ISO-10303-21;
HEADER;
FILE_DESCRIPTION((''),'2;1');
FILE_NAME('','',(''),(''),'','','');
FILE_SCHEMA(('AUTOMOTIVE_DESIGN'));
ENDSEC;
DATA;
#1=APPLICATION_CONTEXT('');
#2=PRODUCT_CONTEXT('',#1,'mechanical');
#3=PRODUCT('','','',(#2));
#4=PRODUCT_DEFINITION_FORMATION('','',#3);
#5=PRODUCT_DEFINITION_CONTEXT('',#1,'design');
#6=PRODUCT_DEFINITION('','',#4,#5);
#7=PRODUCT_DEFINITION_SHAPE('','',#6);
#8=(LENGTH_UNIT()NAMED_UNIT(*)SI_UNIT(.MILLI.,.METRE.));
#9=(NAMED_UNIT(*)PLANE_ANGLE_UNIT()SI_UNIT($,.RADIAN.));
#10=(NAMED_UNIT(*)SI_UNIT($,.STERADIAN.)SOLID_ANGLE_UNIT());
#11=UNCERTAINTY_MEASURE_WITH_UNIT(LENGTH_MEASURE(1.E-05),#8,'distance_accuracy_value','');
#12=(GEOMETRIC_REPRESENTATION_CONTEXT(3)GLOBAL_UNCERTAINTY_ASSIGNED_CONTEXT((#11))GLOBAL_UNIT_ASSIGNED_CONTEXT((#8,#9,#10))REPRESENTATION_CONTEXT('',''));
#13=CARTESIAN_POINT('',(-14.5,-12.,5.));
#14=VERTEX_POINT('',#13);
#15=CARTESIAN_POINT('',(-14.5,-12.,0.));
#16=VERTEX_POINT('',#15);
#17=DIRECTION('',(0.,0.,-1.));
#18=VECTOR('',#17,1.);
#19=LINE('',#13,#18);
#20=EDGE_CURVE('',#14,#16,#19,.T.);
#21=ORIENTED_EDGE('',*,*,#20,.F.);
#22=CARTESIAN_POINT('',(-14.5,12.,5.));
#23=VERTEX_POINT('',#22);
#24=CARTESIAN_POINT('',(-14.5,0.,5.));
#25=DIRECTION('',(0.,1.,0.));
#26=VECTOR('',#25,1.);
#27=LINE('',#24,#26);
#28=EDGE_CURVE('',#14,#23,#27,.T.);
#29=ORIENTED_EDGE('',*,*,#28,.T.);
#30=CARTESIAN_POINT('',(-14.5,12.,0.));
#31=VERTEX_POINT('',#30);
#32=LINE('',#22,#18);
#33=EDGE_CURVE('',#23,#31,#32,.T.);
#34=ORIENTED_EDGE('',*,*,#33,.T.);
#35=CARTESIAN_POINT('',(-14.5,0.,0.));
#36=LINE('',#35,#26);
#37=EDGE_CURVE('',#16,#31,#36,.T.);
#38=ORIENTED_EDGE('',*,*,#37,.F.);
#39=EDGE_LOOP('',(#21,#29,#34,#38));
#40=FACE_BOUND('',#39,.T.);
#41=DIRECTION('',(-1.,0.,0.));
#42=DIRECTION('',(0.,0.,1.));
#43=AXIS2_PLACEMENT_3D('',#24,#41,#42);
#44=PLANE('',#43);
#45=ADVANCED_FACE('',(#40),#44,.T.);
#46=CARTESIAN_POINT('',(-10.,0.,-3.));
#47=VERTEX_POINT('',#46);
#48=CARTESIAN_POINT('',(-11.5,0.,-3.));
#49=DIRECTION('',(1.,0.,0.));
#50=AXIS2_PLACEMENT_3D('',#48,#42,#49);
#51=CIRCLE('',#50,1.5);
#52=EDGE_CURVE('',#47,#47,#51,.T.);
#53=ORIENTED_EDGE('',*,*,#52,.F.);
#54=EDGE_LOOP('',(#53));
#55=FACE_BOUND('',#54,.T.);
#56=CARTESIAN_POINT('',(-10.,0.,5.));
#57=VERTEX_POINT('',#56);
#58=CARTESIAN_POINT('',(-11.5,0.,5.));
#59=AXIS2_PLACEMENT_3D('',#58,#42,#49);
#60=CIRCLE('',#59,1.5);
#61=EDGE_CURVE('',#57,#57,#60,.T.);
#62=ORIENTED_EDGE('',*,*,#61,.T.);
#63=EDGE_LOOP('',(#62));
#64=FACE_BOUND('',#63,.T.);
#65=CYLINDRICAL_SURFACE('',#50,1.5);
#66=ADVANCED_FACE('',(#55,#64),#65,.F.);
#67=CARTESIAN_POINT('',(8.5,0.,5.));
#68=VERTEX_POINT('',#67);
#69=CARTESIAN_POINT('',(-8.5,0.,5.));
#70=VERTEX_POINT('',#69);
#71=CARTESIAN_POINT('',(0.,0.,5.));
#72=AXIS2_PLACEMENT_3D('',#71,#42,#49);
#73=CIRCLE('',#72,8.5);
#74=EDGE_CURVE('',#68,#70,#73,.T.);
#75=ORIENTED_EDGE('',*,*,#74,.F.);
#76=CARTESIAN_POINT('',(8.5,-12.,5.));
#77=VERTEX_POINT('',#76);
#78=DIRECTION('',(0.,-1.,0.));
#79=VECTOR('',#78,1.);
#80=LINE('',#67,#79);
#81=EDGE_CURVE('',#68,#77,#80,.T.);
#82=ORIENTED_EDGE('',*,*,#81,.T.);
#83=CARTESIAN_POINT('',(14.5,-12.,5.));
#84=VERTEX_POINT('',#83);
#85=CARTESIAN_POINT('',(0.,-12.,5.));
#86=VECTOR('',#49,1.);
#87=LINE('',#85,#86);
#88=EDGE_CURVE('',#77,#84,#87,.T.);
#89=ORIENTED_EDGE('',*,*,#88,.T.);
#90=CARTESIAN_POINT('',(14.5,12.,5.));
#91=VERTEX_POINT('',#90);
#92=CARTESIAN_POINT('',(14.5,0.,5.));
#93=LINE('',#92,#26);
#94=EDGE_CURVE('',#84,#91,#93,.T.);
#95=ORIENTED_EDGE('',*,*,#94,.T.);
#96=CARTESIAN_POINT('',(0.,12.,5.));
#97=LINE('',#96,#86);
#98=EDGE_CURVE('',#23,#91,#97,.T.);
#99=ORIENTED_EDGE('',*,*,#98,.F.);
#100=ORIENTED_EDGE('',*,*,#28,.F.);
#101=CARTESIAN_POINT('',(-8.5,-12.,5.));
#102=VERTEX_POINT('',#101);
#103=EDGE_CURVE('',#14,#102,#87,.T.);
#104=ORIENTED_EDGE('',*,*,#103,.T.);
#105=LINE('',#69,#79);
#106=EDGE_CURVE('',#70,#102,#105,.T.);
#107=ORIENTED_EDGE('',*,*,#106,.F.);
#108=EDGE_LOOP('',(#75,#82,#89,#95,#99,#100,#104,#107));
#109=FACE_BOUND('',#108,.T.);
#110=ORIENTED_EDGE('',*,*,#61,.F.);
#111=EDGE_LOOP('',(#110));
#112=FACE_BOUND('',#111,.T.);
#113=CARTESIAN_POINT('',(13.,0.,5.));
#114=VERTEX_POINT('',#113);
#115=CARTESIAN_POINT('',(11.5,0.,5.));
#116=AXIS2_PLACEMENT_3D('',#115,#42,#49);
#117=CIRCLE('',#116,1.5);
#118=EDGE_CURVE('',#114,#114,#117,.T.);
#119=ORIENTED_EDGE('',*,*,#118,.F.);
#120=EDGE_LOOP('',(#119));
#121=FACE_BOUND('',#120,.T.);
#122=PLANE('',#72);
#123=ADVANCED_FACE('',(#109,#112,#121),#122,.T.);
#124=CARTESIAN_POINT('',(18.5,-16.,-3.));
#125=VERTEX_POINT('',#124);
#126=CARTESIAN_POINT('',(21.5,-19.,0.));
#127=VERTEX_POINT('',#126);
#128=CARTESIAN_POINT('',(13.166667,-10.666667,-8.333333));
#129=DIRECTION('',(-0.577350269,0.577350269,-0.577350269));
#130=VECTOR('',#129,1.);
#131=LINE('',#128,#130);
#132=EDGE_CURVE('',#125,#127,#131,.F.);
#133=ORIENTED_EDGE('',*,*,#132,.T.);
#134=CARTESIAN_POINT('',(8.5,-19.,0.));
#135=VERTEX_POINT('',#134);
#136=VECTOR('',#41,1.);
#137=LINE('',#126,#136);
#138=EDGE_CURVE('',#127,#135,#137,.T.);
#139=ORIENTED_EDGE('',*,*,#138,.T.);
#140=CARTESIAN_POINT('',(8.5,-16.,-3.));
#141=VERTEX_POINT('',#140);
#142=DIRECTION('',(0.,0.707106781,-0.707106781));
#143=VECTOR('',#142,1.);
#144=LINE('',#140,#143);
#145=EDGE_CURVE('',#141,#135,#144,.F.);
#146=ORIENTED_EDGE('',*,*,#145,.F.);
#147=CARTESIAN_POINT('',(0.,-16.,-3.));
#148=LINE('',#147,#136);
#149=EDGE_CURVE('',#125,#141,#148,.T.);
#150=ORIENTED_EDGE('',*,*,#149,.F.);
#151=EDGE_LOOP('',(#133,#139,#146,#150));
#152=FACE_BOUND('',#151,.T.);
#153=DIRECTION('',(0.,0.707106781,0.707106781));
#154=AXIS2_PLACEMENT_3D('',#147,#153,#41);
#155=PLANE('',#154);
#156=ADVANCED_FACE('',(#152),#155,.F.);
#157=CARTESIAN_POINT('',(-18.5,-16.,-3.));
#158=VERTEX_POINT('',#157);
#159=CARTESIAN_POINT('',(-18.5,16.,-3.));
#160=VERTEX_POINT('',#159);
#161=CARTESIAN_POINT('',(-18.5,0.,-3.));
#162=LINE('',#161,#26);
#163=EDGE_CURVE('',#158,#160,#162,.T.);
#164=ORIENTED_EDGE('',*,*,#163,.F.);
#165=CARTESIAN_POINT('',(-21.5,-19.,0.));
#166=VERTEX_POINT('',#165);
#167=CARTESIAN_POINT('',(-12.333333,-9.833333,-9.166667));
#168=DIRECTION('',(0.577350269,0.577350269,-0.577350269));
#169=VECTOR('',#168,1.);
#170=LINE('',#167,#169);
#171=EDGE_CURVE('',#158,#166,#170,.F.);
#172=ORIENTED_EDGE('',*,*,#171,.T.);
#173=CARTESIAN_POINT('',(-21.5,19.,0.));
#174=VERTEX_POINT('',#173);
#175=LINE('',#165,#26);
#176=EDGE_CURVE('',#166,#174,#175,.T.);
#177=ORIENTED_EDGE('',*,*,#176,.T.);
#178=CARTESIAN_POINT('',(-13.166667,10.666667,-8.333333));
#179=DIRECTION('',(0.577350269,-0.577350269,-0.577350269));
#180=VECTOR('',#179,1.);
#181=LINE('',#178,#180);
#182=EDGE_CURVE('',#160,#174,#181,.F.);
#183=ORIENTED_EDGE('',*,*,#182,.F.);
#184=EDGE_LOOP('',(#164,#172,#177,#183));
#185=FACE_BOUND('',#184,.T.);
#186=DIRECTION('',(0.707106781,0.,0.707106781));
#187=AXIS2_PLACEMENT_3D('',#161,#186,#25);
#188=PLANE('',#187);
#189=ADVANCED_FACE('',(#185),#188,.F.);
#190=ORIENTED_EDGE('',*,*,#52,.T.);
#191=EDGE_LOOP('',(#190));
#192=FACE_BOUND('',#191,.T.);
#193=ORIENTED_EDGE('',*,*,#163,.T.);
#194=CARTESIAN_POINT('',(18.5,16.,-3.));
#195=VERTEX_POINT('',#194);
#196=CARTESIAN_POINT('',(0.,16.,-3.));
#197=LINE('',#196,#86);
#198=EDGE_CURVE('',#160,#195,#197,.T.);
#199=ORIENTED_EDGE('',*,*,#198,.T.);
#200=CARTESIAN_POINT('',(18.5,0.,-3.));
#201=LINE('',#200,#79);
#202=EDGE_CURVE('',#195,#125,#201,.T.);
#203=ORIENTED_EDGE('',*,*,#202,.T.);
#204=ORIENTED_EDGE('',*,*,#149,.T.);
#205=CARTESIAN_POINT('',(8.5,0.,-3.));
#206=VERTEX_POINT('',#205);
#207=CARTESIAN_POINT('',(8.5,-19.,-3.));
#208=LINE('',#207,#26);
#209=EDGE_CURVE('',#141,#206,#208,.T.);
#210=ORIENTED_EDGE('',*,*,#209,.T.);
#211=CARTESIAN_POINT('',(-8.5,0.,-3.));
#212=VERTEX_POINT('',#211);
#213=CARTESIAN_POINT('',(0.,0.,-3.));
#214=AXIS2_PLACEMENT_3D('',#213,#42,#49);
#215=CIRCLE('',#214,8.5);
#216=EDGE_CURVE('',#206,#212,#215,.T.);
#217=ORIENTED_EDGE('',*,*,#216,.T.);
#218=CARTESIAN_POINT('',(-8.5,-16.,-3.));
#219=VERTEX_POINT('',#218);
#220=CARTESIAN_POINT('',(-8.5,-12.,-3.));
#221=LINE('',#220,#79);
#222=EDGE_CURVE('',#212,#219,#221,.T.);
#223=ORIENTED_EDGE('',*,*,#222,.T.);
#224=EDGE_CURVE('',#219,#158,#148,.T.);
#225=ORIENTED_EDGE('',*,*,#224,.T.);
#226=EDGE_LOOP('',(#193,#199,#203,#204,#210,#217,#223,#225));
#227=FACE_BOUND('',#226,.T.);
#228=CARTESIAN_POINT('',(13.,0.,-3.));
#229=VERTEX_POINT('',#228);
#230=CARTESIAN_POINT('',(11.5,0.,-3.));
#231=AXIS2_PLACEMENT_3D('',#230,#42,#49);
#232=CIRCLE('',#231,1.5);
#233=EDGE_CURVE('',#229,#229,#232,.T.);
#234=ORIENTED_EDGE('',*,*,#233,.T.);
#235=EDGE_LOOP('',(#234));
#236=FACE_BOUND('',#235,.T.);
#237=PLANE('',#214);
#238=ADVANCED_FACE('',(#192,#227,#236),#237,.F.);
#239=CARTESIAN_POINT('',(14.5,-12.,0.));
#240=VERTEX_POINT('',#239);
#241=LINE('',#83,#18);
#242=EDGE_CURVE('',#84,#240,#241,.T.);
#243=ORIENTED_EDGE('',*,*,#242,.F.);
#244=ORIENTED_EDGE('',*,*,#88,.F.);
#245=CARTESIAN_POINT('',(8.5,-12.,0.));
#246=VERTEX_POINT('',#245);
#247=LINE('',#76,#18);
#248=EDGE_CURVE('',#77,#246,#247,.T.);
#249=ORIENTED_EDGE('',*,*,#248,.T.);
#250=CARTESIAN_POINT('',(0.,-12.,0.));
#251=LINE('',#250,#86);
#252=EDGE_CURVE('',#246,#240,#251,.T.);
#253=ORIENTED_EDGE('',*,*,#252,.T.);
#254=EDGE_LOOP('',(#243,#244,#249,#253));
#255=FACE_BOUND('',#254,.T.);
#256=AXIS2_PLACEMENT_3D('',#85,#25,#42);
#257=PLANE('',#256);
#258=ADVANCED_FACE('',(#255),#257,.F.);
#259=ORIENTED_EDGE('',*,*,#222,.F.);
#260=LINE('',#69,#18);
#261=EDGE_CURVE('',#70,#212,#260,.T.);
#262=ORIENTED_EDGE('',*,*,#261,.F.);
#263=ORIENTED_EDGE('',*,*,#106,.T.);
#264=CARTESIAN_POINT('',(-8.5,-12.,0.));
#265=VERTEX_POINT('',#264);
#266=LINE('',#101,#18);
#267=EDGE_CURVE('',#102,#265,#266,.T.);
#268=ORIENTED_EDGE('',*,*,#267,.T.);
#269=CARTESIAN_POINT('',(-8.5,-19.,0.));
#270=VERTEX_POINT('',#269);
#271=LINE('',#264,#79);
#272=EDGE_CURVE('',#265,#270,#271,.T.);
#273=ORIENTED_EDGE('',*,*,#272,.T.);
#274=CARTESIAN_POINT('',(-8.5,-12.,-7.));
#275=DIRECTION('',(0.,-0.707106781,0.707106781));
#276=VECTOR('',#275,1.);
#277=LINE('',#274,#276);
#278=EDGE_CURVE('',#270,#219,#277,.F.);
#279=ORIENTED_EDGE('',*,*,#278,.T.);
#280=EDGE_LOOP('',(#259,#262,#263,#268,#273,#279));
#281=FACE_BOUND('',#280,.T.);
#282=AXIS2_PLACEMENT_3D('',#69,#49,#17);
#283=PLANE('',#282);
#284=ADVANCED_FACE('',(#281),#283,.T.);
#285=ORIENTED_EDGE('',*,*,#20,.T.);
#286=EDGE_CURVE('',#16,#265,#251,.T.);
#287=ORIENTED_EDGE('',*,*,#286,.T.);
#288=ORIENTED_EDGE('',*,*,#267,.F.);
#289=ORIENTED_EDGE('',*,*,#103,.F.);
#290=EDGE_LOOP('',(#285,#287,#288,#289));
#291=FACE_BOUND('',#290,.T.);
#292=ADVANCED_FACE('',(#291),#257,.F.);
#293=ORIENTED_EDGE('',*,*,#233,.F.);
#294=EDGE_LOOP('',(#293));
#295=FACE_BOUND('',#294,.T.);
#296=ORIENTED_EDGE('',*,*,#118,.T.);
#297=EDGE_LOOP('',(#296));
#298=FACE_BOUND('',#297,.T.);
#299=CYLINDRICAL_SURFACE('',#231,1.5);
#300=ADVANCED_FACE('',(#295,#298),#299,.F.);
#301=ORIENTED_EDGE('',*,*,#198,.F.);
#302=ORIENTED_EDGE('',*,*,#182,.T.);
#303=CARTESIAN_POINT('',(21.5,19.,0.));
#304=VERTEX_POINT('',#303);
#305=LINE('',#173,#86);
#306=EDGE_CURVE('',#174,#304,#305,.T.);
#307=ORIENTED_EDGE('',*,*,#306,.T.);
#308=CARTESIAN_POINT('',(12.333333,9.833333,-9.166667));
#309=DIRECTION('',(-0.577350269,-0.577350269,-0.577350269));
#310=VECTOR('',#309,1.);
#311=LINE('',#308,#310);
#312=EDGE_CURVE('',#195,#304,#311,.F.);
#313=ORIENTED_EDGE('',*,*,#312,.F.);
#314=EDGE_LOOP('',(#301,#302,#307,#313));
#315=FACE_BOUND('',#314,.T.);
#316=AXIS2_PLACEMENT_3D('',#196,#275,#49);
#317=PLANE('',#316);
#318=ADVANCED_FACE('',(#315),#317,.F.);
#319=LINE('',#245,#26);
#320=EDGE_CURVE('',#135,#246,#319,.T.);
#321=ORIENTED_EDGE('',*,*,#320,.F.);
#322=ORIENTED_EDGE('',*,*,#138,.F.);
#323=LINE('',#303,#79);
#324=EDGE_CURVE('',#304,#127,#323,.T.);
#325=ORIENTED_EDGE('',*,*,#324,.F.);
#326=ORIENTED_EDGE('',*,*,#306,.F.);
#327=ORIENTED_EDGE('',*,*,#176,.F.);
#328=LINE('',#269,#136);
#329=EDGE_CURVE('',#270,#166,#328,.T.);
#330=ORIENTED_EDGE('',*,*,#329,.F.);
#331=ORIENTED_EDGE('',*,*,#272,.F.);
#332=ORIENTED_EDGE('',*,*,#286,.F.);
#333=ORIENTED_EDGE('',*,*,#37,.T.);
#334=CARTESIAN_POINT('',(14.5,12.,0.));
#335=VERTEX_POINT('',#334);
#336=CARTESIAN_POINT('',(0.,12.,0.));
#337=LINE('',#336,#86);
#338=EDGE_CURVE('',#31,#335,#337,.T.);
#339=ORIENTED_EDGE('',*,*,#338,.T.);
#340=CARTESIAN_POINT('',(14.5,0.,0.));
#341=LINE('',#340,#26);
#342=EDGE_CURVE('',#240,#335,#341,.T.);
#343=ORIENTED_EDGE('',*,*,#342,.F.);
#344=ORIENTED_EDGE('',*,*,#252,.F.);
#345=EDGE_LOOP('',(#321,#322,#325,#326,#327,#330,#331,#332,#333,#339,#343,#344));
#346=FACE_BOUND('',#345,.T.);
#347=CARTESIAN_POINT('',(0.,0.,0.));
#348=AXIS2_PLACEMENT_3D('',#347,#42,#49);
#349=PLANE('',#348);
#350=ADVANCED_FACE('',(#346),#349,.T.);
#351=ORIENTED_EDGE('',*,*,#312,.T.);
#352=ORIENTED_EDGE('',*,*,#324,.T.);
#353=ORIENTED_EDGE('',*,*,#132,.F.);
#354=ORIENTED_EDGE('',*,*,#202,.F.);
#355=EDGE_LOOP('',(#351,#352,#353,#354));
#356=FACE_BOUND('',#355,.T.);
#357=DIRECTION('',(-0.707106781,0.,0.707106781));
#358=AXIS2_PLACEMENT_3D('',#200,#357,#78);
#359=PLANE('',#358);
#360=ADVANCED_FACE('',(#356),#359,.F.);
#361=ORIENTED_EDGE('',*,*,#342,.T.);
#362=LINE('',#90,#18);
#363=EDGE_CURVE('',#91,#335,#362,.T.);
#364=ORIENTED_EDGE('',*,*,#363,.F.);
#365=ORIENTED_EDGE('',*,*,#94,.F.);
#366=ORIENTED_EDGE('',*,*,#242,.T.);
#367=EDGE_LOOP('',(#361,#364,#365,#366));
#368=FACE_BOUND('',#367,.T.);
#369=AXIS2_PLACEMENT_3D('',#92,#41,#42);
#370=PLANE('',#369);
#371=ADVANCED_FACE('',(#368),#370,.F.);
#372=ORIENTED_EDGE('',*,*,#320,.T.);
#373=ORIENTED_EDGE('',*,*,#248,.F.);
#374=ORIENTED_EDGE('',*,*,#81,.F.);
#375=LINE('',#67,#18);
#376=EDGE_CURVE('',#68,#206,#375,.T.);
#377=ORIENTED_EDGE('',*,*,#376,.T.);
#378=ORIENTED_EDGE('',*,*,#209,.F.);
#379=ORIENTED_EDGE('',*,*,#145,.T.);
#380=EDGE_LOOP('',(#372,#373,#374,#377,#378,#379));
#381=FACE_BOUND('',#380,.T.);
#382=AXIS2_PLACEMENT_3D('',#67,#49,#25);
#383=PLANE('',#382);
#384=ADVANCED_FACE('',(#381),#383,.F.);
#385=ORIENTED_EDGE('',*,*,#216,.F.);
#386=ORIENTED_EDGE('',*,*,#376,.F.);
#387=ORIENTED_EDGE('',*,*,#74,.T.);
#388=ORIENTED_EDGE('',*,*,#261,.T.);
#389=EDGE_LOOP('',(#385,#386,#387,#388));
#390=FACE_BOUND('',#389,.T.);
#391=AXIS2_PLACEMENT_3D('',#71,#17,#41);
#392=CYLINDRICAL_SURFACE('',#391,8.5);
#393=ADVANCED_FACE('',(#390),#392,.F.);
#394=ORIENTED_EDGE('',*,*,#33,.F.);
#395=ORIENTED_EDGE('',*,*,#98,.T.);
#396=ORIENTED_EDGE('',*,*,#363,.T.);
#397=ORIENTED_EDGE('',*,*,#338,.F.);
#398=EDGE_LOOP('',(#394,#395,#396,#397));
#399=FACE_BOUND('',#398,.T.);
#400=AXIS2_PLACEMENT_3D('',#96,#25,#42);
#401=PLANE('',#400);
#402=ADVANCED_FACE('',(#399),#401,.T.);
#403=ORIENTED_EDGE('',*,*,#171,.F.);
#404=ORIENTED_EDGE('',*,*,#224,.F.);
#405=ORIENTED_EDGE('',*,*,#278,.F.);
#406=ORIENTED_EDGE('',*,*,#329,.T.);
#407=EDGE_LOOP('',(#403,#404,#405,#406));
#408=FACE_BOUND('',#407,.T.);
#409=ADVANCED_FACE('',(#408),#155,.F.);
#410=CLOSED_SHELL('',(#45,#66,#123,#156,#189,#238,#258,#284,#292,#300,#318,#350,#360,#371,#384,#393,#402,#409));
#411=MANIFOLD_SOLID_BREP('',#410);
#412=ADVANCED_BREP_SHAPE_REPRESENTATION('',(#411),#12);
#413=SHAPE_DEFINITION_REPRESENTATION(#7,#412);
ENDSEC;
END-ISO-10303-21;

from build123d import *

# Parameters (mm, degrees)
EXTRUDE_1_DEPTH     = 5
EXTRUDE_START       = 3
EXTRUDE_2_DEPTH     = 3
SKETCH_3_R          = 1.5
CUT_EXTRUDE_1_DEPTH = 30.786742017
CHAMFER_1_SIZE      = 3


with BuildPart() as part:
    # ｽｹｯﾁ1 → ﾎﾞｽ - 押し出し1 (new body)
    with BuildSketch(Plane.XY):
        with BuildLine():
            ThreePointArc((-8.5, 0), (0, 8.5), (8.5, 0))
            Line((8.5, 0), (8.5, -12))
            Line((8.5, -12), (14.5, -12))
            Line((14.5, -12), (14.5, 12))
            Line((14.5, 12), (-14.5, 12))
            Line((-14.5, 12), (-14.5, -12))
            Line((-14.5, -12), (-8.5, -12))
            Line((-8.5, -12), (-8.5, 0))
        make_face()
    extrude(amount=EXTRUDE_1_DEPTH)

    # ｽｹｯﾁ2 → ﾎﾞｽ - 押し出し2 (add)
    with BuildSketch(Plane(origin=(0, 0, 0), x_dir=(-1, 0, 0), z_dir=(0, 0, -1)).offset(EXTRUDE_START)):
        with BuildLine():
            Line((8.5, -12), (8.5, -19))
            Line((8.5, -19), (21.5, -19))
            Line((21.5, -19), (21.5, 19))
            Line((21.5, 19), (-21.5, 19))
            Line((-21.5, 19), (-21.5, -19))
            Line((-21.5, -19), (-8.5, -19))
            Line((-8.5, -19), (-8.5, -12))
            Line((-8.5, -12), (-8.5, 0))
            ThreePointArc((-8.5, 0), (0, 8.5), (8.5, 0))
            Line((8.5, 0), (8.5, -12))
        make_face()
    extrude(amount=-EXTRUDE_2_DEPTH)

    # ｽｹｯﾁ3 → ｶｯﾄ - 押し出し1 (cut, through all)
    with BuildSketch(Plane.XY.offset(5)):
        with Locations((11.5, 0)):
            Circle(SKETCH_3_R)
        with Locations((-11.5, 0)):
            Circle(SKETCH_3_R)
    extrude(amount=-CUT_EXTRUDE_1_DEPTH, mode=Mode.SUBTRACT)

    # 面取り1
    chamfer_1_edges = [part.edges().sort_by_distance(p)[0] for p in [
        (15, -19, -3),
        (21.5, 0, -3),
        (0, 19, -3),
        (-21.5, 0, -3),
        (-15, -19, -3),
    ]]
    chamfer(chamfer_1_edges, length=CHAMFER_1_SIZE - 0.0001)  # a hair under: the kernel refuses the full size


solid = part.part
